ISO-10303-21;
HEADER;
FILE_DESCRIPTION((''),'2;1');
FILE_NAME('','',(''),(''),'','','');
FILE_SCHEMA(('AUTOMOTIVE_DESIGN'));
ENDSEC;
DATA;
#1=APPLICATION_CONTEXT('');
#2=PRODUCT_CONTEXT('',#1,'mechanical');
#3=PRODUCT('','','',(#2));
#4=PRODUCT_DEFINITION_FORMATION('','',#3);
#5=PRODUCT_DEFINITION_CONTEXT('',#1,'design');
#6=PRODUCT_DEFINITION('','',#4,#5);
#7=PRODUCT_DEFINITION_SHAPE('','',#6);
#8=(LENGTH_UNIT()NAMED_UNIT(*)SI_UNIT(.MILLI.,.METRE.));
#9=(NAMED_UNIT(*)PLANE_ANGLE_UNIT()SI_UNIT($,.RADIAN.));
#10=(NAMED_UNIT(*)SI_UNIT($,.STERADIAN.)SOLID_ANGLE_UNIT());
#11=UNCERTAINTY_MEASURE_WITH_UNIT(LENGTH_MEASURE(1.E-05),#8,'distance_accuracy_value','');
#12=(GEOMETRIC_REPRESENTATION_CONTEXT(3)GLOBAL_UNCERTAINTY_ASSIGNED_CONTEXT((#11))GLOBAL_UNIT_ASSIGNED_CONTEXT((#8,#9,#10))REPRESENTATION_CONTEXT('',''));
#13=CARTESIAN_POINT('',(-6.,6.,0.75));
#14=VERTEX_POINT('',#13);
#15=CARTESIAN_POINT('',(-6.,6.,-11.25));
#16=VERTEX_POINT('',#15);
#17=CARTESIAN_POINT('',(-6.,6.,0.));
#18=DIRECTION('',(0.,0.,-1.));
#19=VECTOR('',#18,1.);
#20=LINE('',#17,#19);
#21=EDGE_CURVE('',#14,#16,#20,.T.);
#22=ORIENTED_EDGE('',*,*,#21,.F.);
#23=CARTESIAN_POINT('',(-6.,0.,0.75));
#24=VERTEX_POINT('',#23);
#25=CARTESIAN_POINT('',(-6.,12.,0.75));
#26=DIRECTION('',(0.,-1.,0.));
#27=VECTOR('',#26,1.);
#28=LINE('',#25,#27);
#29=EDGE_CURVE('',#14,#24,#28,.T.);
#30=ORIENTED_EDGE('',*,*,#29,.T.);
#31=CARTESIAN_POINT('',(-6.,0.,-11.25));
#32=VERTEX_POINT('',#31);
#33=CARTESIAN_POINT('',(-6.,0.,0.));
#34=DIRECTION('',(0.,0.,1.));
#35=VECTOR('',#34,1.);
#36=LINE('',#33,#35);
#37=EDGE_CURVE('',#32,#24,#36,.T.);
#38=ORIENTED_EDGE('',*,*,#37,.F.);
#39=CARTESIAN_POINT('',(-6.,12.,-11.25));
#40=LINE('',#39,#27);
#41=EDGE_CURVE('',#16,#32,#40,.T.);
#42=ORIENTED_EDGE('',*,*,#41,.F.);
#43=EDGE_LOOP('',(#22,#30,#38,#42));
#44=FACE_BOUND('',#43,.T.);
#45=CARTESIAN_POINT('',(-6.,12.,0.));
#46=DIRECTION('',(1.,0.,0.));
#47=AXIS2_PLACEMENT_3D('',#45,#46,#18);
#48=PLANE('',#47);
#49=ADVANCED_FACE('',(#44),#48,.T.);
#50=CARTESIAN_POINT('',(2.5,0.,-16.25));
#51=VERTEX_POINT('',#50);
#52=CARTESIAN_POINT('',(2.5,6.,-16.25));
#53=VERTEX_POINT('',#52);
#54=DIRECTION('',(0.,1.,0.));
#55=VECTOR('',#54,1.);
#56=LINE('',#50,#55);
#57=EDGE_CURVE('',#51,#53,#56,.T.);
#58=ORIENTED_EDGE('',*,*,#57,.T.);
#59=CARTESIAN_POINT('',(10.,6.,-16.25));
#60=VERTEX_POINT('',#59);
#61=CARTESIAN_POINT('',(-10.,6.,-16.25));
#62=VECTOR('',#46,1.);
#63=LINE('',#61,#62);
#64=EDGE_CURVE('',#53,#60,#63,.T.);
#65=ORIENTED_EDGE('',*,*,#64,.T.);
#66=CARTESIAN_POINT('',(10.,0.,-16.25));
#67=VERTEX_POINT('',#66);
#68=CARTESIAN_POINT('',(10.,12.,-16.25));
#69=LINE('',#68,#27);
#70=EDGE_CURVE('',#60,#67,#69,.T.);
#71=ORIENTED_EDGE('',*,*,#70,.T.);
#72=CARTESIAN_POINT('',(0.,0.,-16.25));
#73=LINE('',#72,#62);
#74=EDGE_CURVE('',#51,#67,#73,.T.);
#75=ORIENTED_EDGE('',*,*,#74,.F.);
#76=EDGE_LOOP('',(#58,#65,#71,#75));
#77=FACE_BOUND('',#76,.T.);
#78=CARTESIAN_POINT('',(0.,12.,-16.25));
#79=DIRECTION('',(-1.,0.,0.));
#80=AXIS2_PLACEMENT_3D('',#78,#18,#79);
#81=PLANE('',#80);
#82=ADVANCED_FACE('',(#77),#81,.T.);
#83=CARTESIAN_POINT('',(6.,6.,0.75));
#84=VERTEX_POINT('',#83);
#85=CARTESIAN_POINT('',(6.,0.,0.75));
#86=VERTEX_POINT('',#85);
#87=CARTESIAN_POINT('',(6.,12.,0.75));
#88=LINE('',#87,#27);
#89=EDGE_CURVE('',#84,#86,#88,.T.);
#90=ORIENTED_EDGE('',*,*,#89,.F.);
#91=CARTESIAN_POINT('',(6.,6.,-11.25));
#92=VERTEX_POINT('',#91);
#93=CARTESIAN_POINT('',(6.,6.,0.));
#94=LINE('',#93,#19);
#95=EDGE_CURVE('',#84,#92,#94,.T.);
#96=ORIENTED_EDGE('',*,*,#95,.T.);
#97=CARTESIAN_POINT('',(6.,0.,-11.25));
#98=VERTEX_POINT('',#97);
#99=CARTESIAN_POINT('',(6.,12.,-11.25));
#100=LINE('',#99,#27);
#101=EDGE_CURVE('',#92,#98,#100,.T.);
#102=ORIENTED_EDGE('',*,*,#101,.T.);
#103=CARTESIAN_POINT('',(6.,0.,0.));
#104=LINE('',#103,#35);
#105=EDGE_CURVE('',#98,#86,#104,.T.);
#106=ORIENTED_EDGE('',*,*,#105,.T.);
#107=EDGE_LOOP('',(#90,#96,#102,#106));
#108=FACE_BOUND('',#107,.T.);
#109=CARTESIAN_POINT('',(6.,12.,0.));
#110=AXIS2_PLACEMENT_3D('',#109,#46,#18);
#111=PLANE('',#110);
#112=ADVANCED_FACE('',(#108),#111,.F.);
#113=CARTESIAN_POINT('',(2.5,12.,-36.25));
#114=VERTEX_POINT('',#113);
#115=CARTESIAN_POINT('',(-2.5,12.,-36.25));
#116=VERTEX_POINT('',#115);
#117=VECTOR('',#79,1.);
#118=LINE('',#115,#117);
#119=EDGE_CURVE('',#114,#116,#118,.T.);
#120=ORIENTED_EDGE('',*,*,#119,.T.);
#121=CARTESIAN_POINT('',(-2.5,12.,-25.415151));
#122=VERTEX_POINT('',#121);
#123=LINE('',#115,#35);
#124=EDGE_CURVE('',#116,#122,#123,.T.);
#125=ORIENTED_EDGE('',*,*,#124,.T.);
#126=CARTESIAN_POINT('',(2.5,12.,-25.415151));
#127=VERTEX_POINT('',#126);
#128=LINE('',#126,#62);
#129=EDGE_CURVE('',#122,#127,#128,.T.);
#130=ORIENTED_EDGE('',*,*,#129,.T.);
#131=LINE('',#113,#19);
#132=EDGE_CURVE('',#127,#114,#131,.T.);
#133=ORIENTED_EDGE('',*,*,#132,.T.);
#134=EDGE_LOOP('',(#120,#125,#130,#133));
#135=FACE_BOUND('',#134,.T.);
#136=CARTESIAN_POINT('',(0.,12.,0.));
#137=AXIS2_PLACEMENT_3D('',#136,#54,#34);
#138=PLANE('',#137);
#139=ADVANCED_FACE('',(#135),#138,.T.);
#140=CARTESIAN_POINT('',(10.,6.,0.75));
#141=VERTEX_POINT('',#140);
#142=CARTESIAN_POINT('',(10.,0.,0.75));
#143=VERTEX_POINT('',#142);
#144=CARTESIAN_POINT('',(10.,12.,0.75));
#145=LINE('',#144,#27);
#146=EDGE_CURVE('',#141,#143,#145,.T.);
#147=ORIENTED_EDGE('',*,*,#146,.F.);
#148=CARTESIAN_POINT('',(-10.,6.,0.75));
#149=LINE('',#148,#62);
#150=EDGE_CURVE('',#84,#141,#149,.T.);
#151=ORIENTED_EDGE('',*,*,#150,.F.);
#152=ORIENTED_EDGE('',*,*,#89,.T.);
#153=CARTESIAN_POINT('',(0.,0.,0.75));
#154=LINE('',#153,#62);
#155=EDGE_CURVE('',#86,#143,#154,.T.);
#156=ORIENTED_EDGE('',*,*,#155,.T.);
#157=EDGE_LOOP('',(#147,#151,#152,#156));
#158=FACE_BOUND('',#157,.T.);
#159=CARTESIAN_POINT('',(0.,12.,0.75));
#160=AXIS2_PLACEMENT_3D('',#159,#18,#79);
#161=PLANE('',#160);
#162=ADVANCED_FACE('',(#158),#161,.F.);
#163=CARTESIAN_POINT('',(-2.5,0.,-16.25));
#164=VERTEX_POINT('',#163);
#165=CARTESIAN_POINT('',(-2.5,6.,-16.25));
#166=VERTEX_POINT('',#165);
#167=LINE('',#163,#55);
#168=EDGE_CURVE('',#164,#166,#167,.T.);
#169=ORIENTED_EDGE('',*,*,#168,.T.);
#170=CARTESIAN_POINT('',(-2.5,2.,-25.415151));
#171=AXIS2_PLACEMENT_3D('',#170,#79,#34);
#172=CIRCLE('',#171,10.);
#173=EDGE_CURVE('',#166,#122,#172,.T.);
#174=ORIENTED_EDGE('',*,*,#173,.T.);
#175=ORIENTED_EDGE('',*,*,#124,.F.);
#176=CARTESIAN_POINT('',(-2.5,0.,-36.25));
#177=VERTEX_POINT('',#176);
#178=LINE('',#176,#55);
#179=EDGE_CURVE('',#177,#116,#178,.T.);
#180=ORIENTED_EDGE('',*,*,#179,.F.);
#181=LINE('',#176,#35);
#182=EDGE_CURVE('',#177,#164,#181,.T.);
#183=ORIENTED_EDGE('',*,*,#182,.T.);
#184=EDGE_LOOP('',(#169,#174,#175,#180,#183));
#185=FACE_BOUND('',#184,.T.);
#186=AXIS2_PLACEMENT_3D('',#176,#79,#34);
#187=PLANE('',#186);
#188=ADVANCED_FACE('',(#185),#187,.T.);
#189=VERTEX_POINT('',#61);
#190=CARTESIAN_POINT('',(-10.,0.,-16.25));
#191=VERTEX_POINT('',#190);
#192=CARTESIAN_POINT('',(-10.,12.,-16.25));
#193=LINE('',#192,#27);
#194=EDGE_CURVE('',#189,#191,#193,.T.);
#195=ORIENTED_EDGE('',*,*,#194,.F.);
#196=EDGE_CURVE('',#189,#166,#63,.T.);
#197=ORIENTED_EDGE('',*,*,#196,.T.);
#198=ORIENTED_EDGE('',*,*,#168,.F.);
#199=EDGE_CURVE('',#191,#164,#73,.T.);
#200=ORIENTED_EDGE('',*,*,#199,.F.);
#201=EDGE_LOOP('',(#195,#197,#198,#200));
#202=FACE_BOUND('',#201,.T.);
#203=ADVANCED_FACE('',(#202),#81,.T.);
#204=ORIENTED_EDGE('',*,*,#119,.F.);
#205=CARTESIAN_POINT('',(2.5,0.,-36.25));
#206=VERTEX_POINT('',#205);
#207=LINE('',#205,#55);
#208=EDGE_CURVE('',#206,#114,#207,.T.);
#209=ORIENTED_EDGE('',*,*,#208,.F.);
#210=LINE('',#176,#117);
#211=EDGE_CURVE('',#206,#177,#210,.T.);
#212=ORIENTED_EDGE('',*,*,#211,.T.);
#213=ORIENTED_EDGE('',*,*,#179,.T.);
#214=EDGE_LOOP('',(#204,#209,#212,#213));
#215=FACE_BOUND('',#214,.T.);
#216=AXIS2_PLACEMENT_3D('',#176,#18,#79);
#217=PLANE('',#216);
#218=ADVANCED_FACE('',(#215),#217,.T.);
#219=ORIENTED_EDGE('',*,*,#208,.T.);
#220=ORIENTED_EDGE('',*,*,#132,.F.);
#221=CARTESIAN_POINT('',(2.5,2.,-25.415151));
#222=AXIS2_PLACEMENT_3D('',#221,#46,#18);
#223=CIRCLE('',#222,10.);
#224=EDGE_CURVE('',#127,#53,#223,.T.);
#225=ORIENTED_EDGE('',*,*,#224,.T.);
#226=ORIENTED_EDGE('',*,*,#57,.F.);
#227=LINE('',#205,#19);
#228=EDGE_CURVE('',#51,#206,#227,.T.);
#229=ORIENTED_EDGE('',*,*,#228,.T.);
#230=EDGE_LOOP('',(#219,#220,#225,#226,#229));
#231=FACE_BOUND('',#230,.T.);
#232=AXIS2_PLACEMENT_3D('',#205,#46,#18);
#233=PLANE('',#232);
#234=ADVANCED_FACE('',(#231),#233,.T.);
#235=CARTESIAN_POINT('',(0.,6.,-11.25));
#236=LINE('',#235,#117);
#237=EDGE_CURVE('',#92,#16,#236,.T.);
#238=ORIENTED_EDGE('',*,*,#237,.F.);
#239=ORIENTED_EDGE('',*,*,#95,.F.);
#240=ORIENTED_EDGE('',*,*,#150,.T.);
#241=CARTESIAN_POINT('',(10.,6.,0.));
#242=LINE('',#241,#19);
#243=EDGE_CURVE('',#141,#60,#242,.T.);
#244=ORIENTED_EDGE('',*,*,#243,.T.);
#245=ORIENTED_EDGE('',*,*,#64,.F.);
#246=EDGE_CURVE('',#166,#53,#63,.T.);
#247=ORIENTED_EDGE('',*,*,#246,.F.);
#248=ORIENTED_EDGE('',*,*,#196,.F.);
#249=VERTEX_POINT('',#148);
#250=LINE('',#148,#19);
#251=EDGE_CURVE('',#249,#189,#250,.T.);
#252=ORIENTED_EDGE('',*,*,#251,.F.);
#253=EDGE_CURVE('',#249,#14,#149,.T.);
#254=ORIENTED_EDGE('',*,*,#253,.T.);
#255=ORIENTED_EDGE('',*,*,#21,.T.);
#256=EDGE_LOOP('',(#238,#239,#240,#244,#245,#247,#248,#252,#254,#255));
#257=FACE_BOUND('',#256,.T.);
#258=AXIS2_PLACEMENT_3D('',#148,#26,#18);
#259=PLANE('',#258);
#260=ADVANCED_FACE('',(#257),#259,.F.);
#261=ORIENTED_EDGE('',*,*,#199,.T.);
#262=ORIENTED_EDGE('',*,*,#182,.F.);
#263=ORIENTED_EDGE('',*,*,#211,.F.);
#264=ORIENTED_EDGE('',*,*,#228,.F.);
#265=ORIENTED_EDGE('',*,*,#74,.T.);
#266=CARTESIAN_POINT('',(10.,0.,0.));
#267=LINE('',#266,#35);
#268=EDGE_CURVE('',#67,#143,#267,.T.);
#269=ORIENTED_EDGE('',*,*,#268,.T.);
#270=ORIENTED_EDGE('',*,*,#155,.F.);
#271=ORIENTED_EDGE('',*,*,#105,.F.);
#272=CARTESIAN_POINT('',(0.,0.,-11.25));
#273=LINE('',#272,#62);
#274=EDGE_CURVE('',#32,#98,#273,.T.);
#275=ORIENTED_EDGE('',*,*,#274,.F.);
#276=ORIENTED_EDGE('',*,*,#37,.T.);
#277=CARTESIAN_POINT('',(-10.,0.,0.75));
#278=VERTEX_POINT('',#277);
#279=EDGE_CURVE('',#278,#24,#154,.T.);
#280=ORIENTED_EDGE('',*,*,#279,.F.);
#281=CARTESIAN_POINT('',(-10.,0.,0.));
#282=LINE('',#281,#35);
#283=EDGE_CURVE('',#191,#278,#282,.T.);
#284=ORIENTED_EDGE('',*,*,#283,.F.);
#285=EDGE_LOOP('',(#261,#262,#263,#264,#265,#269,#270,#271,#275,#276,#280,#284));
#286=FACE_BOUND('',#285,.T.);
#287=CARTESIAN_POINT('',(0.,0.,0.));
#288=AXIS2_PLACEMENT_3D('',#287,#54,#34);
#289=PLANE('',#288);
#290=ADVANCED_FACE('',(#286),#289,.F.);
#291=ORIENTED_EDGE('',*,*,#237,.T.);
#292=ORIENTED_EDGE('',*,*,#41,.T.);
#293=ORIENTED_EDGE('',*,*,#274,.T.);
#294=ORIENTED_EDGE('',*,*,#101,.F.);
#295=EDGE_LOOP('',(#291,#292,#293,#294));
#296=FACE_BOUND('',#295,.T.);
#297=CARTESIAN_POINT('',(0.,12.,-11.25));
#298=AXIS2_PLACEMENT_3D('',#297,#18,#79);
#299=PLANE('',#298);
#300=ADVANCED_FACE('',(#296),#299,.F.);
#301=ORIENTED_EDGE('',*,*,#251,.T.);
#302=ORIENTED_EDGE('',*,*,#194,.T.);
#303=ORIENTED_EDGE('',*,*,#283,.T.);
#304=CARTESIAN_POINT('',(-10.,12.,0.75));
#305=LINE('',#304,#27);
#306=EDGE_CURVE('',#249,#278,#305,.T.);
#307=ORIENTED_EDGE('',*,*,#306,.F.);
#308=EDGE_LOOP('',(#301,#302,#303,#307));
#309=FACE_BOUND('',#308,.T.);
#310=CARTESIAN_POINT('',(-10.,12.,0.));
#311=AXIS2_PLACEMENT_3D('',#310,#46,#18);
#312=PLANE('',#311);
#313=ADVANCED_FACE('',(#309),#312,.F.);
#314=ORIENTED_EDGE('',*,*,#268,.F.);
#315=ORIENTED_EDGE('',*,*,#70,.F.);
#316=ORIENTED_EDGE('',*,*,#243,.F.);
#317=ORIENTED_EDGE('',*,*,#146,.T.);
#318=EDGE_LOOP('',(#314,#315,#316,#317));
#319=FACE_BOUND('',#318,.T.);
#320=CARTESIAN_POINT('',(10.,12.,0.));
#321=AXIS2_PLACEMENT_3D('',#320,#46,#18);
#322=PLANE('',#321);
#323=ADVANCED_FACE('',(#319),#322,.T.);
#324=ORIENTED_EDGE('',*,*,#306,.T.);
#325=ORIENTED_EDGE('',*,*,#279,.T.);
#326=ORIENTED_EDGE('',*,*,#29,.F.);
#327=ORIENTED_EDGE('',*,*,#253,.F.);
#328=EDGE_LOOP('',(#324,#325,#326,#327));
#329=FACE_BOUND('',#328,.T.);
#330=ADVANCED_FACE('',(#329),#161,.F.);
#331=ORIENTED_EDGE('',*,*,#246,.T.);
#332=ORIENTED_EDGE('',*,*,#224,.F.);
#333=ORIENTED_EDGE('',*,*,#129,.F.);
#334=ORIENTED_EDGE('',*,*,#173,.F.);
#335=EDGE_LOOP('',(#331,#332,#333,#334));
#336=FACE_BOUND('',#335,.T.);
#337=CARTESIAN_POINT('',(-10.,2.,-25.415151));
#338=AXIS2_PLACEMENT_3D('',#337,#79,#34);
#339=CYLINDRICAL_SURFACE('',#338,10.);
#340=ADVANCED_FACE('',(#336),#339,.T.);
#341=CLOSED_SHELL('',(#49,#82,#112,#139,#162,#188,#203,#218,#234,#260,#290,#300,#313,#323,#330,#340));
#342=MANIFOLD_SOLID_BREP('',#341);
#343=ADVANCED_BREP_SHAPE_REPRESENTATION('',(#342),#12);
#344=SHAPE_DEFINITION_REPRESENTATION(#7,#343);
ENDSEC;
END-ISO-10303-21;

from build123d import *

# Parameters (mm, degrees)
BOSS_EXTRUDE1_DEPTH     = 12
SKETCH3_W               = 5
SKETCH3_H               = 20
BOSS_EXTRUDE2_DEPTH     = 12
CUT_EXTRUDE1_DEPTH      = 44.1052491
CUT_EXTRUDE1_DEPTH_BACK = 44.1052491
SKETCH4_W               = 17
SKETCH4_H               = 6
FILLET1_R               = 10


with BuildPart() as part:
    # Sketch2 → Boss-Extrude1 (new body)
    with BuildSketch(Plane(origin=(0, 0, 0), x_dir=(1, 0, 0), z_dir=(0, 1, 0))):
        Polygon((-6, -0.75), (-6, 11.25), (6, 11.25), (6, -0.75), (10, -0.75), (10, 16.25), (-10, 16.25), (-10, -0.75), align=None)
    extrude(amount=BOSS_EXTRUDE1_DEPTH)

    # Sketch3 → Boss-Extrude2 (add)
    with BuildSketch(Plane(origin=(0, 12, 0), x_dir=(1, 0, 0), z_dir=(0, 1, 0))):
        with Locations((0, 26.25)):
            Rectangle(SKETCH3_W, SKETCH3_H)
    extrude(amount=-BOSS_EXTRUDE2_DEPTH)

    # Sketch4 → Cut-Extrude1 (cut, two sides: drawn at the far end of the back side and taken through both)
    with BuildSketch(Plane(origin=(10, 0, 0), x_dir=(0, 0, -1), z_dir=(1, 0, 0)).offset(-CUT_EXTRUDE1_DEPTH_BACK)):
        with Locations((7.75, 9)):
            Rectangle(SKETCH4_W, SKETCH4_H)
    extrude(amount=CUT_EXTRUDE1_DEPTH + CUT_EXTRUDE1_DEPTH_BACK, mode=Mode.SUBTRACT)

    # Fillet1
    # the kernel refuses this fillet: 10 mm, written as the material it takes off along each edge
    with BuildSketch(Plane(origin=(25.412878475, 12, -16.25), x_dir=(0, -1, 0), z_dir=(-1, 0, 0))) as fillet1_piece_1:
        with BuildLine():
            CenterArc((10, -9.16515139), FILLET1_R, 113.578178478, 66.421821522)
            Line((0, -9.16515139), (-0.2, -9.16515139))
            Line((-0.2, -9.16515139), (-0.2, 0))
            Line((-0.2, 0), (0, 0.2))
            ThreePointArc((0, 0.2), (3, 0.2), (5.92, 0.183303028))
            Line((5.92, 0.183303028), (6, 0))
        make_face()
    extrude(amount=50.82575695, mode=Mode.SUBTRACT)


solid = part.part
